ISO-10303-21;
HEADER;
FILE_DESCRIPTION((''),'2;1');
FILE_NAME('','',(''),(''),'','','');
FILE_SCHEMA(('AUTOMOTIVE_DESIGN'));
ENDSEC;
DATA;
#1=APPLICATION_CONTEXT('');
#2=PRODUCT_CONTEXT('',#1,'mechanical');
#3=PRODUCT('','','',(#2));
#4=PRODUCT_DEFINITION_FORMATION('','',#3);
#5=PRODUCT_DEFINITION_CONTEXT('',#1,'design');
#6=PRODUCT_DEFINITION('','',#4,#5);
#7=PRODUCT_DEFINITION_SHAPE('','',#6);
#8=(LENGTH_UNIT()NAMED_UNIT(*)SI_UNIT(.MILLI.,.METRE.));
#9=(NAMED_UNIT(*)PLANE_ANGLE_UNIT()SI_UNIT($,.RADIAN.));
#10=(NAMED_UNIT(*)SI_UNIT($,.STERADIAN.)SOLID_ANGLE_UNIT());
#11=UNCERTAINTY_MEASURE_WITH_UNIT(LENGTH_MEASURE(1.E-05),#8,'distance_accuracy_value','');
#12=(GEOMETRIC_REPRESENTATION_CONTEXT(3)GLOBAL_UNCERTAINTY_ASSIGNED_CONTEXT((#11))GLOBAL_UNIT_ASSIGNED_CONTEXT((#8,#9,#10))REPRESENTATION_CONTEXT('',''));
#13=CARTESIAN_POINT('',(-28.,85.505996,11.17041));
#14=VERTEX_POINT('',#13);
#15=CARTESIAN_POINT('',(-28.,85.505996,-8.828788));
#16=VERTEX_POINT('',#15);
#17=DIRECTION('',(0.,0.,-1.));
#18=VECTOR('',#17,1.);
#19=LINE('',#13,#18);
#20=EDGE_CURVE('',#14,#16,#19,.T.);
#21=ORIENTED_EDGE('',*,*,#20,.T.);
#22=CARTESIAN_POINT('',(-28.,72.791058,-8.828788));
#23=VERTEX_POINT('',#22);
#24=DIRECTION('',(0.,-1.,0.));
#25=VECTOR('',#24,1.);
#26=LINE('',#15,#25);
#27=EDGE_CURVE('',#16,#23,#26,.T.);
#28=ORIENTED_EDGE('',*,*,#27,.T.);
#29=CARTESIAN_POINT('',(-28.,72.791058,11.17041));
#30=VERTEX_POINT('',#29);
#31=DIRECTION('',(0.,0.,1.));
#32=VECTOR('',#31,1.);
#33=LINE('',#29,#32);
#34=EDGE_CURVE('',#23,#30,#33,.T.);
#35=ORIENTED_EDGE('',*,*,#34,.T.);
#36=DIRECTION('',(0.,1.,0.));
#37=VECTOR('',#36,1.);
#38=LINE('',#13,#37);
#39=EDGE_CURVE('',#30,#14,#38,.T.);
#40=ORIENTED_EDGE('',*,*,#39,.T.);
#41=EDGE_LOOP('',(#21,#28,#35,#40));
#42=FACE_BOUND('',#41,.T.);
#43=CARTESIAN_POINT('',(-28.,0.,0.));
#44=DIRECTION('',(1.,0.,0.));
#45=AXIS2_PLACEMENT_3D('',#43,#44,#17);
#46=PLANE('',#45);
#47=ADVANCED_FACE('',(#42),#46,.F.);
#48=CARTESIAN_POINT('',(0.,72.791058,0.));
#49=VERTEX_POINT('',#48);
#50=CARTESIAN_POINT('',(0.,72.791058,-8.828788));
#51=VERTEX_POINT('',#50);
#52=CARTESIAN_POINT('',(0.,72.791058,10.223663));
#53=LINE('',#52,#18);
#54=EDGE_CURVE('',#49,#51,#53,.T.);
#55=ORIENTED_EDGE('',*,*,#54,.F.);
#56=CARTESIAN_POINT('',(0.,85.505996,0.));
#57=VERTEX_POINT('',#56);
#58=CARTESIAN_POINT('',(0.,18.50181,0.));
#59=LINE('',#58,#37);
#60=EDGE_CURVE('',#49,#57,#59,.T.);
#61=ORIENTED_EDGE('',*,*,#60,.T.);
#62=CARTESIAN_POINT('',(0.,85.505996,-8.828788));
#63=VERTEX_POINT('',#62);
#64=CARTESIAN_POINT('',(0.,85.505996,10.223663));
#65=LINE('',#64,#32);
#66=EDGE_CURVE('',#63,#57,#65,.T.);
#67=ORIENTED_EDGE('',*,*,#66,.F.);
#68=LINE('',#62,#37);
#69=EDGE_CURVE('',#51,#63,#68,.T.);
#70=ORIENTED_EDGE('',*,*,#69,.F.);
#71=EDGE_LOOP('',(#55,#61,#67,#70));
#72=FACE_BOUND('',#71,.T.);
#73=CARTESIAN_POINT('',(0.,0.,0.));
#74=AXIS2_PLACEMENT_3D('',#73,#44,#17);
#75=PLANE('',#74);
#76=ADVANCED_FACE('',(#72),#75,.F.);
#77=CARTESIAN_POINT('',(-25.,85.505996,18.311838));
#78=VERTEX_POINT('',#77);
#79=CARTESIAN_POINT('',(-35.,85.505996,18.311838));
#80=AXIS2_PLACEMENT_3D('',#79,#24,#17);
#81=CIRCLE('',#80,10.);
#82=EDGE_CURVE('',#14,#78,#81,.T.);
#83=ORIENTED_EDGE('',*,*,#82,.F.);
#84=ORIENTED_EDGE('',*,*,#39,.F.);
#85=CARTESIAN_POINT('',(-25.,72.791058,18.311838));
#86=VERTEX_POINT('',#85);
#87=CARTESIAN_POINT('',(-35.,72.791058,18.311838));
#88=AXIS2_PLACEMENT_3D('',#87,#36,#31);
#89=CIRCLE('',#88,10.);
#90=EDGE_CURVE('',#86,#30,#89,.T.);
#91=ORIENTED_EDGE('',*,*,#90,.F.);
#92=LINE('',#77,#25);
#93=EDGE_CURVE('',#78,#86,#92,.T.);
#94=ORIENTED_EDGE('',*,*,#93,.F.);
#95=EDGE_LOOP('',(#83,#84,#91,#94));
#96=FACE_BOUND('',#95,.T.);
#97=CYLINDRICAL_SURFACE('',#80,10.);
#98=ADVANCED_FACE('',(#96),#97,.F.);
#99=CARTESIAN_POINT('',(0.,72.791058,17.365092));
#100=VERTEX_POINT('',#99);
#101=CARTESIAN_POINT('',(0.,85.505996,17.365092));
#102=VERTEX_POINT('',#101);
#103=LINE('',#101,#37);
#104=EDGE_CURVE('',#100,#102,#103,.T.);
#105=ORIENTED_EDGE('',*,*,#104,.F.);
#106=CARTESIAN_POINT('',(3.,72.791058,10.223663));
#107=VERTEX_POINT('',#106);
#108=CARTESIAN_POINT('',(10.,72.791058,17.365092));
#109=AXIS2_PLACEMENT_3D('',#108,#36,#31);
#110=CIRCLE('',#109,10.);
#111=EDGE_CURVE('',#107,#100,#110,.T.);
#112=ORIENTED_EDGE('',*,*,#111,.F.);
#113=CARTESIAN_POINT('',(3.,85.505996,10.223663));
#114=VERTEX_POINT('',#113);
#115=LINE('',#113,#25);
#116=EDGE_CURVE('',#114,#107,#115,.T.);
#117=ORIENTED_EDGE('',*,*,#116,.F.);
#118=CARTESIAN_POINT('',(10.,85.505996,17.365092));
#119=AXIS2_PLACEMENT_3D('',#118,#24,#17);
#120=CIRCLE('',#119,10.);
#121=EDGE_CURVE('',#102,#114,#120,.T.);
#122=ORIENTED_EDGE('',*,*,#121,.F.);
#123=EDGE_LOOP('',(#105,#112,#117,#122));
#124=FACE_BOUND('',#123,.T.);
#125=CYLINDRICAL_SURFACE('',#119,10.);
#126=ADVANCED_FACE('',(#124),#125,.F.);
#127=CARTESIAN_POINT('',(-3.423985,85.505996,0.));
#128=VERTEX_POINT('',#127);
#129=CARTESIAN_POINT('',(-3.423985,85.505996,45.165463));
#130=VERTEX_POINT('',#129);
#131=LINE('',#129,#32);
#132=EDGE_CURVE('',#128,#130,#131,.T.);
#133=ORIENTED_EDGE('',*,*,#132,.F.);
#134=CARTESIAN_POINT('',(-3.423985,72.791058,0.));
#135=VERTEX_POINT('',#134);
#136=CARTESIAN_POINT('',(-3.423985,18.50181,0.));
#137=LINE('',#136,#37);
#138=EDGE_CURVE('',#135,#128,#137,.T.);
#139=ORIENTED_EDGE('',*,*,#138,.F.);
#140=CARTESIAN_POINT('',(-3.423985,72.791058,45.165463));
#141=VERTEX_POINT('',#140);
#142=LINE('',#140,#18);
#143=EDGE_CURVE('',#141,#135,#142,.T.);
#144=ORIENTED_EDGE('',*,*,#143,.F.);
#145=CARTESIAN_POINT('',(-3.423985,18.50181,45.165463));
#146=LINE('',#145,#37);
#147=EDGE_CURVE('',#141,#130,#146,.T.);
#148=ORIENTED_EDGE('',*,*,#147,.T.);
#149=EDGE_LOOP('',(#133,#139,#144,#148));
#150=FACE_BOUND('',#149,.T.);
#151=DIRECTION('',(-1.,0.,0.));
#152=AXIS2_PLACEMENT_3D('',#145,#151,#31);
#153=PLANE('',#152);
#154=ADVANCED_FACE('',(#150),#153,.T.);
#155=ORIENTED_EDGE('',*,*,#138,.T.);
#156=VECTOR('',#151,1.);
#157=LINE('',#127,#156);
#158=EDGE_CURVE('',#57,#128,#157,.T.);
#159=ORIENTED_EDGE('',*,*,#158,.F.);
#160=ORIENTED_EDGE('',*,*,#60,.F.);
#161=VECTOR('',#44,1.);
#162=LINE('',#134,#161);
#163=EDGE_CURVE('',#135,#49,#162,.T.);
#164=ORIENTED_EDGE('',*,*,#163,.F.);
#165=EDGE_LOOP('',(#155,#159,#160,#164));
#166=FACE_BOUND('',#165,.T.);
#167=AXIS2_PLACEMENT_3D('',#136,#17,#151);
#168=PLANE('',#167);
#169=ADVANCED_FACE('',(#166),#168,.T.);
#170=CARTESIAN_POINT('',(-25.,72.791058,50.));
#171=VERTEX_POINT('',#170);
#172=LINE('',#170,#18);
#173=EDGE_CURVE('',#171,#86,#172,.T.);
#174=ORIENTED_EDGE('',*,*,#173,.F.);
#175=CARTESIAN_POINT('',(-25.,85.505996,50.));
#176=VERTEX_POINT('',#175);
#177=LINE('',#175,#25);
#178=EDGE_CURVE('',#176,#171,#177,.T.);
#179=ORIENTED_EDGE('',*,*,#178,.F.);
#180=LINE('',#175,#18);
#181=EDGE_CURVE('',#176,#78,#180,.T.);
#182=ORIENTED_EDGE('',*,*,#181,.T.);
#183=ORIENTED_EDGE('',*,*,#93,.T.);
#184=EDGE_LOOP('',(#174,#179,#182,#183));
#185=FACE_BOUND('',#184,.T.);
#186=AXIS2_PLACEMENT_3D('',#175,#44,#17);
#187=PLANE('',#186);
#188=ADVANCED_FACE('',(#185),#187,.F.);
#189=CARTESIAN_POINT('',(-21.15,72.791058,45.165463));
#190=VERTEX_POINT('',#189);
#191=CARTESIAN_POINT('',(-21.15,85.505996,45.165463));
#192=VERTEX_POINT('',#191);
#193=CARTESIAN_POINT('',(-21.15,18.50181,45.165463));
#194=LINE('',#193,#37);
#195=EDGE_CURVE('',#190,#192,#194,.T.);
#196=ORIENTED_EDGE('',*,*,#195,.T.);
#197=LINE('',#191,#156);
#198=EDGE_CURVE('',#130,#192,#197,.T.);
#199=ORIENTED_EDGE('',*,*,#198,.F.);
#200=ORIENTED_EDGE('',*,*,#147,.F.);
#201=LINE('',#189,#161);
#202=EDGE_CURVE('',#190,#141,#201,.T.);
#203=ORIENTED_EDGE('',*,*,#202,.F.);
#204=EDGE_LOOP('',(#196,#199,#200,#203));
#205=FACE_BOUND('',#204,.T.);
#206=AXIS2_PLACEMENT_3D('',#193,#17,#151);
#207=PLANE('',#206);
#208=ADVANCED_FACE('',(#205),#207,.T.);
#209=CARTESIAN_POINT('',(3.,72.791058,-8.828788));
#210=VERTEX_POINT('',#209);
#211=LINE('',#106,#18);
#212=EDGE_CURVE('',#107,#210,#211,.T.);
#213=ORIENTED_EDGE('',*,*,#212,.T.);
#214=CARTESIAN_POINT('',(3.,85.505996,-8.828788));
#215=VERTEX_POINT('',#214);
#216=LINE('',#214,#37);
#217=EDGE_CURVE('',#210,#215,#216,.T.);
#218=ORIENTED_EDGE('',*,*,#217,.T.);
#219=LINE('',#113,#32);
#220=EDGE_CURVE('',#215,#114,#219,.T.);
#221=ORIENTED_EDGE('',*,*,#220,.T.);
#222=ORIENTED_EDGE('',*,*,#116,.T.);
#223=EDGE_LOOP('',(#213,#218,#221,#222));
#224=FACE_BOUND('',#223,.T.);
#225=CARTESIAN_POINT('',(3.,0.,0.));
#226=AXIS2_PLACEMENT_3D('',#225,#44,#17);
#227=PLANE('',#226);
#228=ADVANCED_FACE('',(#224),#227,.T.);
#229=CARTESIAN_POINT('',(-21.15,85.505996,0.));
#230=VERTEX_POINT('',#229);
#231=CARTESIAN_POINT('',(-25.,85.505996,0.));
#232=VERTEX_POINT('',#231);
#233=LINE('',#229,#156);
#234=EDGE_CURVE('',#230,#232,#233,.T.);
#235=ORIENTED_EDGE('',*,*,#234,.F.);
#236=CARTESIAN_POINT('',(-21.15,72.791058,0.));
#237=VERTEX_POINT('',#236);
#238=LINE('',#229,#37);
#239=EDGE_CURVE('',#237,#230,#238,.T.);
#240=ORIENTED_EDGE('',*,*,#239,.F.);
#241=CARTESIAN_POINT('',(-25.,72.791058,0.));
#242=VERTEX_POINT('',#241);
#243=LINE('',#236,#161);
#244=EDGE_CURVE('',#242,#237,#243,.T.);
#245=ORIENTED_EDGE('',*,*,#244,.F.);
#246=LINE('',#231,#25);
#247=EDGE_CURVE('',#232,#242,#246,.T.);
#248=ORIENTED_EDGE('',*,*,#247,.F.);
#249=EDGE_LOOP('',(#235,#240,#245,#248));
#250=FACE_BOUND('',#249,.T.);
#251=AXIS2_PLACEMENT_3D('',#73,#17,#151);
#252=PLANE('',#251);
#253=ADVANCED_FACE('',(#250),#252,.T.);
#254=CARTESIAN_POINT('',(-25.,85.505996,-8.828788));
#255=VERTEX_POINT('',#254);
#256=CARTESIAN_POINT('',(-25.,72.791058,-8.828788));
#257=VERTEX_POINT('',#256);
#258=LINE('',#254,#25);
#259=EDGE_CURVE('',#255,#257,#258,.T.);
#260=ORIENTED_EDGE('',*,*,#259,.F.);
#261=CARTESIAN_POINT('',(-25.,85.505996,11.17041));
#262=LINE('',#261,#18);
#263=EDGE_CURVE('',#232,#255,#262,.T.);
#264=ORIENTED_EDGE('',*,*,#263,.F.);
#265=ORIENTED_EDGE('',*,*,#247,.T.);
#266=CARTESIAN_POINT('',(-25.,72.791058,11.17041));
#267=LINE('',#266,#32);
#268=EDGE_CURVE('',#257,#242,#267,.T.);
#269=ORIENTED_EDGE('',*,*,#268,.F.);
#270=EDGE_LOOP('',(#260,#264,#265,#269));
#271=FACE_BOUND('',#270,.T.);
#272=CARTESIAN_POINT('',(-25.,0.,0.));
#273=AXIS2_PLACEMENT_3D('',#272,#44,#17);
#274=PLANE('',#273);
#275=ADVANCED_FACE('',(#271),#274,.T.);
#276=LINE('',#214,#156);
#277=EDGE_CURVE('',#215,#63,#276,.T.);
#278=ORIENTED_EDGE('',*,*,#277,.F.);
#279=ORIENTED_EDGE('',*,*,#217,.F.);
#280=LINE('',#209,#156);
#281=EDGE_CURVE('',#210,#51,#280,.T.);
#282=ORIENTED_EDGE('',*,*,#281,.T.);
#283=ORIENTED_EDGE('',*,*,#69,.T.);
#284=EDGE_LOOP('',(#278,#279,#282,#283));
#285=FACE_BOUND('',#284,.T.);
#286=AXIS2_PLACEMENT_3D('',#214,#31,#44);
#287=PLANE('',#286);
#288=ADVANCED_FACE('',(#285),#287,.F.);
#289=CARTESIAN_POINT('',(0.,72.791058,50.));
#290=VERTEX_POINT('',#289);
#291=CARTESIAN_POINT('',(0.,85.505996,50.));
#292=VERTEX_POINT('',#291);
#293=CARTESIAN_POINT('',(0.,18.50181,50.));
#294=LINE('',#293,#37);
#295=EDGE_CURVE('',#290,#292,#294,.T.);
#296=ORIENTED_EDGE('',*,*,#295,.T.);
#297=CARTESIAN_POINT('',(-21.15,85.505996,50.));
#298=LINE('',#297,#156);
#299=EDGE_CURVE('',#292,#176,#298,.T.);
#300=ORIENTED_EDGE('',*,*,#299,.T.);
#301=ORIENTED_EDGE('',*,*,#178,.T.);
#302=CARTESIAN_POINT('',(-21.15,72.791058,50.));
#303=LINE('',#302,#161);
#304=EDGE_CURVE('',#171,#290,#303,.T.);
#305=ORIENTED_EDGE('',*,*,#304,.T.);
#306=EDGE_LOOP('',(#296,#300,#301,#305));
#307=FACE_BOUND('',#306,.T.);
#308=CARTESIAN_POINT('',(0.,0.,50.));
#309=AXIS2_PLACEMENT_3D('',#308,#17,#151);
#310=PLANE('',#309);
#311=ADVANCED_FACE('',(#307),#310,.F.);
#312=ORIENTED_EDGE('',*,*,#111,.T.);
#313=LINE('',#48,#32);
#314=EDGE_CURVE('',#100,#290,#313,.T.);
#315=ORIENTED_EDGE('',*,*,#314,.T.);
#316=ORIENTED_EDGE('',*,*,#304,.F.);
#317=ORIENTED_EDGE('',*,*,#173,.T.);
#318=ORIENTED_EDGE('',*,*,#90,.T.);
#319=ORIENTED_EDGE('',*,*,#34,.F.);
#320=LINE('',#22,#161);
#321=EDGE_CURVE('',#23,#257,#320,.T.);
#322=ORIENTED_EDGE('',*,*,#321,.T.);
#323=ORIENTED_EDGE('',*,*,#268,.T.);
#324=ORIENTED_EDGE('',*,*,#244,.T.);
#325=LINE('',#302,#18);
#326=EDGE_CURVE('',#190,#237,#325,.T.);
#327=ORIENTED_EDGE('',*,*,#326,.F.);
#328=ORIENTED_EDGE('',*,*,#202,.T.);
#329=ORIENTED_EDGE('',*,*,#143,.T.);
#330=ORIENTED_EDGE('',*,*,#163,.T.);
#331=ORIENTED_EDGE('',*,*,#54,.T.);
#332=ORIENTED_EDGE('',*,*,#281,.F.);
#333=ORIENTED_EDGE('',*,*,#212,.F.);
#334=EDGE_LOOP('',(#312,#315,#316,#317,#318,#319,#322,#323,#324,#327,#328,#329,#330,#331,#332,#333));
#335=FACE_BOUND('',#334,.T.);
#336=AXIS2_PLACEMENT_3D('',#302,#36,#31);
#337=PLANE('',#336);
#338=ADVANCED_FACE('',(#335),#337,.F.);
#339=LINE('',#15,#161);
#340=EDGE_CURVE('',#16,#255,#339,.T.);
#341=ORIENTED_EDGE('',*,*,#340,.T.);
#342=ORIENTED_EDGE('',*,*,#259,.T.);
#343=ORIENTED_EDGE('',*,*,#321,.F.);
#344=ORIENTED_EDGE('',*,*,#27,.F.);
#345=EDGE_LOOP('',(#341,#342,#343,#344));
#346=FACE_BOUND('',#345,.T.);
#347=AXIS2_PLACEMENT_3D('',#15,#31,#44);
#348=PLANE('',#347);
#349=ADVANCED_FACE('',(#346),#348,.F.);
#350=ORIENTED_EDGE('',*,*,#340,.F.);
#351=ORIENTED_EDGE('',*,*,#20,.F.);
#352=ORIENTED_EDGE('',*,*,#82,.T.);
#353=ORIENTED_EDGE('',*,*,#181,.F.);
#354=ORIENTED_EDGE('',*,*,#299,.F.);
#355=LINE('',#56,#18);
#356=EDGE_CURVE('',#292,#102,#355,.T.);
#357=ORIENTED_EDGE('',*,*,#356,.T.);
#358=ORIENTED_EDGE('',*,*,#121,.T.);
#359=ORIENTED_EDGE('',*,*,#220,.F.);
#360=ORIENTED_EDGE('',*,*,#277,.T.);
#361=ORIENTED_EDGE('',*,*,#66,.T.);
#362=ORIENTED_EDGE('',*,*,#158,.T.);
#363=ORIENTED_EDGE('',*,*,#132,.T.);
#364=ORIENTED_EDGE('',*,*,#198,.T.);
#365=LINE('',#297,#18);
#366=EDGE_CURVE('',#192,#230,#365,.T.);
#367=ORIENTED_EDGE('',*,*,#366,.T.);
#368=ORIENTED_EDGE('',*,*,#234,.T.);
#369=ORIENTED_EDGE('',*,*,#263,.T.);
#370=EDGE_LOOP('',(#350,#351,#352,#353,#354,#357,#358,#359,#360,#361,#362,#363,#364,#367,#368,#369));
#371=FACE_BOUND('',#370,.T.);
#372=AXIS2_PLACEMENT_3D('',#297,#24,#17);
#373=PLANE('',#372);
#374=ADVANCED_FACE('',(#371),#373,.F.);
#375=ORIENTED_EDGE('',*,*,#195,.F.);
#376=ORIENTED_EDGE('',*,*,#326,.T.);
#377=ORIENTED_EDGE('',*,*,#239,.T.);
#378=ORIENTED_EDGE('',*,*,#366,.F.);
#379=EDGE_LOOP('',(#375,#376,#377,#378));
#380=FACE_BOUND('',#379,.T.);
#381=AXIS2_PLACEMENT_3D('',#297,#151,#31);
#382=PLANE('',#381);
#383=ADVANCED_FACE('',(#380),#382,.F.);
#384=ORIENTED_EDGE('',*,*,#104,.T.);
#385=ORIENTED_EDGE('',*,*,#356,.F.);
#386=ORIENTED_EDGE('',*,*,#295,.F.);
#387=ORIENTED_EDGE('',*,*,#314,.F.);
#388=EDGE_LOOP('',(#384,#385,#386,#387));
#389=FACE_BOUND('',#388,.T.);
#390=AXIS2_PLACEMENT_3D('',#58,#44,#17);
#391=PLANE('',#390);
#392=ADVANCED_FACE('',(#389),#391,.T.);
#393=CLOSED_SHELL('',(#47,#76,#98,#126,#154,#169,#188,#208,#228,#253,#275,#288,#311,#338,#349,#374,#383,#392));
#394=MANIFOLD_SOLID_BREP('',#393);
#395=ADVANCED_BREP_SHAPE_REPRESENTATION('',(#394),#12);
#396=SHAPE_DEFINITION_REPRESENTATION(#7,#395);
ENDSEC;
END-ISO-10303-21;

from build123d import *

# Parameters (mm, degrees)
SKETCH1_W           = 3.85
SKETCH1_H           = 12.714938244
BOSS_EXTRUDE1_DEPTH = 50
BOSS_EXTRUDE2_DEPTH = 12.714938244
SKETCH4_W           = 19.052451889
SKETCH4_H           = 12.714938244
BOSS_EXTRUDE3_DEPTH = 3
FILLET1_R           = 10
SKETCH5_W           = 19.999198202
SKETCH5_H           = 12.714938244
BOSS_EXTRUDE4_DEPTH = 3
FILLET2_R           = 10


with BuildPart() as part:
    # Sketch1 → Boss-Extrude1 (new body)
    with BuildSketch(Plane.XY):
        with Locations((-23.075, 79.148527214)):
            Rectangle(SKETCH1_W, SKETCH1_H)
    extrude(amount=BOSS_EXTRUDE1_DEPTH)

    # Sketch3 → Boss-Extrude2 (add)
    with BuildSketch(Plane(origin=(0, 85.505996336, 0), x_dir=(1, 0, 0), z_dir=(0, 1, 0))):
        Polygon((-21.15, -45.165463377), (-3.42398491, -45.165463377), (-3.42398491, 0), (0, 0), (0, -50), (-21.15, -50), align=None)
    extrude(amount=-BOSS_EXTRUDE2_DEPTH)

    # Sketch4 → Boss-Extrude3 (add)
    with BuildSketch(Plane(origin=(0, 0, 0), x_dir=(0, 0, -1), z_dir=(1, 0, 0))):
        with Locations((-0.697437539, 79.148527214)):
            Rectangle(SKETCH4_W, SKETCH4_H)
    extrude(amount=BOSS_EXTRUDE3_DEPTH)

    # Fillet1
    # the kernel refuses this fillet: 10 mm, written as the material it adds along each edge
    with BuildSketch(Plane(origin=(0, 72.791058092, 10.223663483), x_dir=(0, 0, 1), z_dir=(0, 1, 0))) as fillet1_piece_1:
        with BuildLine():
            CenterArc((7.141428429, 10), FILLET1_R, 224.427004001, 45.572995999)
            Line((0, 3), (-0.142828569, 2.86))
            ThreePointArc((-0.142828569, 2.86), (-0.2, 1.5), (-0.2, 0))
            Line((-0.2, 0), (0, -0.2))
            Line((0, -0.2), (7.141428429, -0.2))
            Line((7.141428429, -0.2), (7.141428429, 0))
        make_face()
    extrude(amount=12.714938244)

    # Sketch5 → Boss-Extrude4 (add)
    with BuildSketch(Plane.ZY.offset(25)):
        with Locations((1.170810695, 79.148527214)):
            Rectangle(SKETCH5_W, SKETCH5_H)
    extrude(amount=BOSS_EXTRUDE4_DEPTH)

    # Fillet2
    # the kernel refuses this fillet: 10 mm, written as the material it adds along each edge
    with BuildSketch(Plane(origin=(-25, 72.791058092, 11.170409796), x_dir=(0, 0, 1), z_dir=(0, 1, 0))) as fillet2_piece_1:
        with BuildLine():
            CenterArc((7.141428429, -10), FILLET2_R, 90, 45.572995999)
            Line((0, -3), (-0.142828569, -2.86))
            ThreePointArc((-0.142828569, -2.86), (-0.2, -1.5), (-0.2, 0))
            Line((-0.2, 0), (0, 0.2))
            Line((0, 0.2), (7.141428429, 0.2))
            Line((7.141428429, 0.2), (7.141428429, 0))
        make_face()
    extrude(amount=12.714938244)


solid = part.part
